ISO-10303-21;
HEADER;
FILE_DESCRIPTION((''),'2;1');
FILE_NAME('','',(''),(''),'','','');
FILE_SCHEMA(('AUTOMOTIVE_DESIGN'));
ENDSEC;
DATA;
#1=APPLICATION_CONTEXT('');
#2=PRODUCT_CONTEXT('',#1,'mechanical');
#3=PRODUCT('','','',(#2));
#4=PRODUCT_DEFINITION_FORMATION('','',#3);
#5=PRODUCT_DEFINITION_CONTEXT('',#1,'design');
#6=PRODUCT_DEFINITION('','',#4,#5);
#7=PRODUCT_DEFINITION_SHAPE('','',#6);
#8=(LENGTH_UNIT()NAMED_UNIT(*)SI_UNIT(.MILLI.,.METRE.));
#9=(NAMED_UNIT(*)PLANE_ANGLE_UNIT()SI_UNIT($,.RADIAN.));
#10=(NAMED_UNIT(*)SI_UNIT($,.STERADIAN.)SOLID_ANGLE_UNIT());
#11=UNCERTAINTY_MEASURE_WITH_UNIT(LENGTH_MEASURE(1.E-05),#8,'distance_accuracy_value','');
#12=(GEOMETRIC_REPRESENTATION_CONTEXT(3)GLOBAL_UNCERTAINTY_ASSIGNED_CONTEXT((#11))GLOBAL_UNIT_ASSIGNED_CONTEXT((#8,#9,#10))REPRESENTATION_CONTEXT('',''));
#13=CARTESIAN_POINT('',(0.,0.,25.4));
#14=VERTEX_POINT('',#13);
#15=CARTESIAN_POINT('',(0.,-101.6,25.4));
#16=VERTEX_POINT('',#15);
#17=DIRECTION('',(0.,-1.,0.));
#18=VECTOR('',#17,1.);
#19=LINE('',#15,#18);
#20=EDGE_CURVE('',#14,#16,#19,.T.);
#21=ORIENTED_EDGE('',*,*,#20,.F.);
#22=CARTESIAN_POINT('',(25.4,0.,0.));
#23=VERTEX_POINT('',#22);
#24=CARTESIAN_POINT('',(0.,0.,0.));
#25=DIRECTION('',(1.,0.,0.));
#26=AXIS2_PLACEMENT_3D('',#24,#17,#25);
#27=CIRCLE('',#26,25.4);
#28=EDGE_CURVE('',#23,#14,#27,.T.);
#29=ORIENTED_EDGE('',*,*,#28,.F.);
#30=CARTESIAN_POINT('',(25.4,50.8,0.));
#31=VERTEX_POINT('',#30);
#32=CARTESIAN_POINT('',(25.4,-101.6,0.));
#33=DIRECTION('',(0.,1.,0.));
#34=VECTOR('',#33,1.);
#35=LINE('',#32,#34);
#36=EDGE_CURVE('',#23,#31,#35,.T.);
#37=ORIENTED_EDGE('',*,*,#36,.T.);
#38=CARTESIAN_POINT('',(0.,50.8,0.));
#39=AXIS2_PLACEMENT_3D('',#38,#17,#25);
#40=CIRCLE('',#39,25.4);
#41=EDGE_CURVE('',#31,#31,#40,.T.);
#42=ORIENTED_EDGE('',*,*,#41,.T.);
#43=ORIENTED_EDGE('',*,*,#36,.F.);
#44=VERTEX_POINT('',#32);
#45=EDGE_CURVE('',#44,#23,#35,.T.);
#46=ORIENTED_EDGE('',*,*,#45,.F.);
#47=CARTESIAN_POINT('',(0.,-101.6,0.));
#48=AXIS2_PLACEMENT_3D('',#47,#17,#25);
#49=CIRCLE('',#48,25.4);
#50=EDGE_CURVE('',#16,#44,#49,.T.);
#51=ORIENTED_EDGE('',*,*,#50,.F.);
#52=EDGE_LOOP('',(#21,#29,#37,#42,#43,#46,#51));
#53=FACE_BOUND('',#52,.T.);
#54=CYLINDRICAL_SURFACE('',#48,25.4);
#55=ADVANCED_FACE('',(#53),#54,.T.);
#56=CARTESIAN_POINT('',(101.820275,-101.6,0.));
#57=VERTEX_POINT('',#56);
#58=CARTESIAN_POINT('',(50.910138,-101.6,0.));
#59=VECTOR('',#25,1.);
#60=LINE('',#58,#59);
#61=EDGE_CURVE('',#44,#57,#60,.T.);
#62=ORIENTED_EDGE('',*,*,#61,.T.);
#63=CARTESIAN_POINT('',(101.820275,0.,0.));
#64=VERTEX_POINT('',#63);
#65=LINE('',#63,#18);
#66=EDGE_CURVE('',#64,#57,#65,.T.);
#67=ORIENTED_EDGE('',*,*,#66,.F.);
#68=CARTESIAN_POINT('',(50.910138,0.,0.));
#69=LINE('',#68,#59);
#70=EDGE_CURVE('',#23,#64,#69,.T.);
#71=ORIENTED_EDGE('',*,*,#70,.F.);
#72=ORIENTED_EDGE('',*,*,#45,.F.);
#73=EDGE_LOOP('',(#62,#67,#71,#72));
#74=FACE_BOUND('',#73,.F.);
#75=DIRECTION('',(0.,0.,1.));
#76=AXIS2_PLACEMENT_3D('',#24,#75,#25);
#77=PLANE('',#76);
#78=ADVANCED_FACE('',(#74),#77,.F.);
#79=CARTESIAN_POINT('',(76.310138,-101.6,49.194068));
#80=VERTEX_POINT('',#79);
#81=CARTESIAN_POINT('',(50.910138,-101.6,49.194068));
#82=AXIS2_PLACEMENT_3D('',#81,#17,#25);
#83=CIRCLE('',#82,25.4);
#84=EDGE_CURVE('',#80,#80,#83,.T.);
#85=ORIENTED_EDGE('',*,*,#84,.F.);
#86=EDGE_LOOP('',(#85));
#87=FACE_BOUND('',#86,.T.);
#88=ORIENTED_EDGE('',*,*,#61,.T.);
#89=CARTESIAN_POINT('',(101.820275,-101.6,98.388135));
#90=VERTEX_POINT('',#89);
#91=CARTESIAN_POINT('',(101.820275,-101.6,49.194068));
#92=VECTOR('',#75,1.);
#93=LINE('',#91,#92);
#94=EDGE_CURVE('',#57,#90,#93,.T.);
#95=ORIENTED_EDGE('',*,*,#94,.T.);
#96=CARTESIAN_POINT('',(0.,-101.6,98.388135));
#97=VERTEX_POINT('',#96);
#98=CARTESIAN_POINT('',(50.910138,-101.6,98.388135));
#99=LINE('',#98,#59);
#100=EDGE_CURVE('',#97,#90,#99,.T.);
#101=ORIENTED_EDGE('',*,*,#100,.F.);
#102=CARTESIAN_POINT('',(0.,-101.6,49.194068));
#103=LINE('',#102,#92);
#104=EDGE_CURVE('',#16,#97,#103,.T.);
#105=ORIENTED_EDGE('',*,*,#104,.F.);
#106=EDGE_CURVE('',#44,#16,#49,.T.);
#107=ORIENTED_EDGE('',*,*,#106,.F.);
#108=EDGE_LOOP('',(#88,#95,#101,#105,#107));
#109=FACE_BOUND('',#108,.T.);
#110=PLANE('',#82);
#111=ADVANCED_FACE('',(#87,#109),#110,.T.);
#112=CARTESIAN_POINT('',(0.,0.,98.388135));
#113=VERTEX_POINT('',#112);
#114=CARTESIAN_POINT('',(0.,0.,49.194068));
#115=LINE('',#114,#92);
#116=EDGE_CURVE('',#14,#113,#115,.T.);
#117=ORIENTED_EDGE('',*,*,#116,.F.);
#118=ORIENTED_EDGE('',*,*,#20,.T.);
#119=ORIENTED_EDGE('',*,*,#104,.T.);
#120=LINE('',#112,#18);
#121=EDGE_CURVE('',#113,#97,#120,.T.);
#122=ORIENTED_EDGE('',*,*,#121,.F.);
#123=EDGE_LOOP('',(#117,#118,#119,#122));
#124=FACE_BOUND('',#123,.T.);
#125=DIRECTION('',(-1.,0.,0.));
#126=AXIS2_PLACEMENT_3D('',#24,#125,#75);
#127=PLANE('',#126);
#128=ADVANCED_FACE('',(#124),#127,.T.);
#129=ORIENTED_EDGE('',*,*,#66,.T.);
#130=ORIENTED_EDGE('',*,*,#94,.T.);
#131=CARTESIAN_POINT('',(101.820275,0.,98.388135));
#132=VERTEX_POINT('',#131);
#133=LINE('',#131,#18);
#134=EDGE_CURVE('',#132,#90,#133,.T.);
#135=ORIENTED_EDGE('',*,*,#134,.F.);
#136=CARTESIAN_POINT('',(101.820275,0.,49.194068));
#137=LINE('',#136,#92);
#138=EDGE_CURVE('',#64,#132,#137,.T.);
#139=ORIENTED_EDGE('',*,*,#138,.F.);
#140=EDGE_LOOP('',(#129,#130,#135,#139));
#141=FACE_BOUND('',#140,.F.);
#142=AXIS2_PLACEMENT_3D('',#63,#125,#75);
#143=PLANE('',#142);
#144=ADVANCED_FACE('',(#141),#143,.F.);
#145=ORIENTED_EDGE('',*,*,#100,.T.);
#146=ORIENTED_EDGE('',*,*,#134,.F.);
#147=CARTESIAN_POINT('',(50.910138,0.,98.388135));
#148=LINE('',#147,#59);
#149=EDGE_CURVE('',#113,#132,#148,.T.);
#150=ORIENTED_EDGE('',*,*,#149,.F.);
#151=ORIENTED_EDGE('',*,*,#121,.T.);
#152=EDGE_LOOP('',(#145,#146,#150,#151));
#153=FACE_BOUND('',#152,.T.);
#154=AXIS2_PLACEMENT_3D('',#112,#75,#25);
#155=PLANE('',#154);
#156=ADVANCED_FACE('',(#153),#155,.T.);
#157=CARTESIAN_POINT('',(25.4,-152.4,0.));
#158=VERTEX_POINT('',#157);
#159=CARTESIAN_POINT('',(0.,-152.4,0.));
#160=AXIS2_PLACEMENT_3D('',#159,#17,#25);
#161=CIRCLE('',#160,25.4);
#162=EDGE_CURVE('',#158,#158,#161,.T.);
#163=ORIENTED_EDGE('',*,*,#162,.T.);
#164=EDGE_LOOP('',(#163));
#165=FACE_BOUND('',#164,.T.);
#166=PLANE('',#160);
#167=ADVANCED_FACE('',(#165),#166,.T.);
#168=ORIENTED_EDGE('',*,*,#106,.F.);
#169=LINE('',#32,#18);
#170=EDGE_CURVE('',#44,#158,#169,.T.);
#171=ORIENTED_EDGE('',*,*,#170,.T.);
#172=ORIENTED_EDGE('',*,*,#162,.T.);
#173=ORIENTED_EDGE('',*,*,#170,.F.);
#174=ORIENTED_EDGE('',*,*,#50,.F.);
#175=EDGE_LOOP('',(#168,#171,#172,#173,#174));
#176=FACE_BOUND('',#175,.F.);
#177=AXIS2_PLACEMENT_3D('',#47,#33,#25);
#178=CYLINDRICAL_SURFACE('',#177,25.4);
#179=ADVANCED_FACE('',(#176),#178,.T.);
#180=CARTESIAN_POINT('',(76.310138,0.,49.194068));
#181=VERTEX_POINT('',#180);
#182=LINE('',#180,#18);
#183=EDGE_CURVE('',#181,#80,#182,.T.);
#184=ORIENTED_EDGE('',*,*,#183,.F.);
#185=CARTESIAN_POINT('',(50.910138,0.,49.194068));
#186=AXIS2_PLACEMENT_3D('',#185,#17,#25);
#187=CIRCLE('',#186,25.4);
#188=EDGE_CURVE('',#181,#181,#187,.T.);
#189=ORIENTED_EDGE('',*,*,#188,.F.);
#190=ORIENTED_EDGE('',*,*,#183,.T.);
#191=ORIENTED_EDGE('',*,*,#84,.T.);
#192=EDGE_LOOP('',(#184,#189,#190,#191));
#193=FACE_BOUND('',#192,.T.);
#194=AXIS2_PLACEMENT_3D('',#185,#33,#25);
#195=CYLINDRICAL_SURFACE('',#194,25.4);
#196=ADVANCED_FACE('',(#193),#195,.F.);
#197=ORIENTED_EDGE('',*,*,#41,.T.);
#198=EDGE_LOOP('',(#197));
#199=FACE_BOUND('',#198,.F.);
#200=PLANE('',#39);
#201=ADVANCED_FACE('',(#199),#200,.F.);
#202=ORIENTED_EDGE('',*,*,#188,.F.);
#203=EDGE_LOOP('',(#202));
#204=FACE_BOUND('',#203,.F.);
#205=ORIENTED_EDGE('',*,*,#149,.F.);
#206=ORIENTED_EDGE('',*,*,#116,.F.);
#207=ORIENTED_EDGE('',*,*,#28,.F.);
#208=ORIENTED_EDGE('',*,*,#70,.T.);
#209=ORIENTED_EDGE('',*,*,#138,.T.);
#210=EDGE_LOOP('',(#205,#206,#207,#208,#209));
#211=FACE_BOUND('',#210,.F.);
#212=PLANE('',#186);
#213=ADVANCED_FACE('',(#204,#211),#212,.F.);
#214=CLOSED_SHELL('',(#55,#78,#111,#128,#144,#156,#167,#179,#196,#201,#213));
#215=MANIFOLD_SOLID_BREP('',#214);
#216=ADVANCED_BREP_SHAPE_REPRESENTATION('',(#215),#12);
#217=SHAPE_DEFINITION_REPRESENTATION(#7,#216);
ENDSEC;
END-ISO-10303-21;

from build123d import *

# Parameters (mm, degrees)
F0_W          = 101.8202751875
F0_H          = 98.3881354332
F0_R          = 25.4
F1_DEPTH      = 101.6
F4_R          = 25.4
F5_DEPTH      = 50.8
F5_DEPTH_BACK = 152.4


# Not quite as in the source:
# - a feature of the source that left no trace in its solid (it failed there, or was rolled back) is left out


with BuildPart() as f1:
    # F0 (on Front) → F1 (new body)
    with BuildSketch(Plane.XZ):
        with Locations((50.9101375937, 49.1940677166)):
            Rectangle(F0_W, F0_H)
        with Locations((50.9101375937, 49.1940677166)):
            Circle(F0_R, mode=Mode.SUBTRACT)
    extrude(amount=F1_DEPTH)

    # F4 (on offset) → F5 (join, two sides)
    with BuildSketch(Plane.XZ.offset(101.6)) as f5_sk:
        Circle(F4_R)
    extrude(amount=F5_DEPTH)
    extrude(f5_sk.sketch, amount=-F5_DEPTH_BACK)


solid = f1.part
